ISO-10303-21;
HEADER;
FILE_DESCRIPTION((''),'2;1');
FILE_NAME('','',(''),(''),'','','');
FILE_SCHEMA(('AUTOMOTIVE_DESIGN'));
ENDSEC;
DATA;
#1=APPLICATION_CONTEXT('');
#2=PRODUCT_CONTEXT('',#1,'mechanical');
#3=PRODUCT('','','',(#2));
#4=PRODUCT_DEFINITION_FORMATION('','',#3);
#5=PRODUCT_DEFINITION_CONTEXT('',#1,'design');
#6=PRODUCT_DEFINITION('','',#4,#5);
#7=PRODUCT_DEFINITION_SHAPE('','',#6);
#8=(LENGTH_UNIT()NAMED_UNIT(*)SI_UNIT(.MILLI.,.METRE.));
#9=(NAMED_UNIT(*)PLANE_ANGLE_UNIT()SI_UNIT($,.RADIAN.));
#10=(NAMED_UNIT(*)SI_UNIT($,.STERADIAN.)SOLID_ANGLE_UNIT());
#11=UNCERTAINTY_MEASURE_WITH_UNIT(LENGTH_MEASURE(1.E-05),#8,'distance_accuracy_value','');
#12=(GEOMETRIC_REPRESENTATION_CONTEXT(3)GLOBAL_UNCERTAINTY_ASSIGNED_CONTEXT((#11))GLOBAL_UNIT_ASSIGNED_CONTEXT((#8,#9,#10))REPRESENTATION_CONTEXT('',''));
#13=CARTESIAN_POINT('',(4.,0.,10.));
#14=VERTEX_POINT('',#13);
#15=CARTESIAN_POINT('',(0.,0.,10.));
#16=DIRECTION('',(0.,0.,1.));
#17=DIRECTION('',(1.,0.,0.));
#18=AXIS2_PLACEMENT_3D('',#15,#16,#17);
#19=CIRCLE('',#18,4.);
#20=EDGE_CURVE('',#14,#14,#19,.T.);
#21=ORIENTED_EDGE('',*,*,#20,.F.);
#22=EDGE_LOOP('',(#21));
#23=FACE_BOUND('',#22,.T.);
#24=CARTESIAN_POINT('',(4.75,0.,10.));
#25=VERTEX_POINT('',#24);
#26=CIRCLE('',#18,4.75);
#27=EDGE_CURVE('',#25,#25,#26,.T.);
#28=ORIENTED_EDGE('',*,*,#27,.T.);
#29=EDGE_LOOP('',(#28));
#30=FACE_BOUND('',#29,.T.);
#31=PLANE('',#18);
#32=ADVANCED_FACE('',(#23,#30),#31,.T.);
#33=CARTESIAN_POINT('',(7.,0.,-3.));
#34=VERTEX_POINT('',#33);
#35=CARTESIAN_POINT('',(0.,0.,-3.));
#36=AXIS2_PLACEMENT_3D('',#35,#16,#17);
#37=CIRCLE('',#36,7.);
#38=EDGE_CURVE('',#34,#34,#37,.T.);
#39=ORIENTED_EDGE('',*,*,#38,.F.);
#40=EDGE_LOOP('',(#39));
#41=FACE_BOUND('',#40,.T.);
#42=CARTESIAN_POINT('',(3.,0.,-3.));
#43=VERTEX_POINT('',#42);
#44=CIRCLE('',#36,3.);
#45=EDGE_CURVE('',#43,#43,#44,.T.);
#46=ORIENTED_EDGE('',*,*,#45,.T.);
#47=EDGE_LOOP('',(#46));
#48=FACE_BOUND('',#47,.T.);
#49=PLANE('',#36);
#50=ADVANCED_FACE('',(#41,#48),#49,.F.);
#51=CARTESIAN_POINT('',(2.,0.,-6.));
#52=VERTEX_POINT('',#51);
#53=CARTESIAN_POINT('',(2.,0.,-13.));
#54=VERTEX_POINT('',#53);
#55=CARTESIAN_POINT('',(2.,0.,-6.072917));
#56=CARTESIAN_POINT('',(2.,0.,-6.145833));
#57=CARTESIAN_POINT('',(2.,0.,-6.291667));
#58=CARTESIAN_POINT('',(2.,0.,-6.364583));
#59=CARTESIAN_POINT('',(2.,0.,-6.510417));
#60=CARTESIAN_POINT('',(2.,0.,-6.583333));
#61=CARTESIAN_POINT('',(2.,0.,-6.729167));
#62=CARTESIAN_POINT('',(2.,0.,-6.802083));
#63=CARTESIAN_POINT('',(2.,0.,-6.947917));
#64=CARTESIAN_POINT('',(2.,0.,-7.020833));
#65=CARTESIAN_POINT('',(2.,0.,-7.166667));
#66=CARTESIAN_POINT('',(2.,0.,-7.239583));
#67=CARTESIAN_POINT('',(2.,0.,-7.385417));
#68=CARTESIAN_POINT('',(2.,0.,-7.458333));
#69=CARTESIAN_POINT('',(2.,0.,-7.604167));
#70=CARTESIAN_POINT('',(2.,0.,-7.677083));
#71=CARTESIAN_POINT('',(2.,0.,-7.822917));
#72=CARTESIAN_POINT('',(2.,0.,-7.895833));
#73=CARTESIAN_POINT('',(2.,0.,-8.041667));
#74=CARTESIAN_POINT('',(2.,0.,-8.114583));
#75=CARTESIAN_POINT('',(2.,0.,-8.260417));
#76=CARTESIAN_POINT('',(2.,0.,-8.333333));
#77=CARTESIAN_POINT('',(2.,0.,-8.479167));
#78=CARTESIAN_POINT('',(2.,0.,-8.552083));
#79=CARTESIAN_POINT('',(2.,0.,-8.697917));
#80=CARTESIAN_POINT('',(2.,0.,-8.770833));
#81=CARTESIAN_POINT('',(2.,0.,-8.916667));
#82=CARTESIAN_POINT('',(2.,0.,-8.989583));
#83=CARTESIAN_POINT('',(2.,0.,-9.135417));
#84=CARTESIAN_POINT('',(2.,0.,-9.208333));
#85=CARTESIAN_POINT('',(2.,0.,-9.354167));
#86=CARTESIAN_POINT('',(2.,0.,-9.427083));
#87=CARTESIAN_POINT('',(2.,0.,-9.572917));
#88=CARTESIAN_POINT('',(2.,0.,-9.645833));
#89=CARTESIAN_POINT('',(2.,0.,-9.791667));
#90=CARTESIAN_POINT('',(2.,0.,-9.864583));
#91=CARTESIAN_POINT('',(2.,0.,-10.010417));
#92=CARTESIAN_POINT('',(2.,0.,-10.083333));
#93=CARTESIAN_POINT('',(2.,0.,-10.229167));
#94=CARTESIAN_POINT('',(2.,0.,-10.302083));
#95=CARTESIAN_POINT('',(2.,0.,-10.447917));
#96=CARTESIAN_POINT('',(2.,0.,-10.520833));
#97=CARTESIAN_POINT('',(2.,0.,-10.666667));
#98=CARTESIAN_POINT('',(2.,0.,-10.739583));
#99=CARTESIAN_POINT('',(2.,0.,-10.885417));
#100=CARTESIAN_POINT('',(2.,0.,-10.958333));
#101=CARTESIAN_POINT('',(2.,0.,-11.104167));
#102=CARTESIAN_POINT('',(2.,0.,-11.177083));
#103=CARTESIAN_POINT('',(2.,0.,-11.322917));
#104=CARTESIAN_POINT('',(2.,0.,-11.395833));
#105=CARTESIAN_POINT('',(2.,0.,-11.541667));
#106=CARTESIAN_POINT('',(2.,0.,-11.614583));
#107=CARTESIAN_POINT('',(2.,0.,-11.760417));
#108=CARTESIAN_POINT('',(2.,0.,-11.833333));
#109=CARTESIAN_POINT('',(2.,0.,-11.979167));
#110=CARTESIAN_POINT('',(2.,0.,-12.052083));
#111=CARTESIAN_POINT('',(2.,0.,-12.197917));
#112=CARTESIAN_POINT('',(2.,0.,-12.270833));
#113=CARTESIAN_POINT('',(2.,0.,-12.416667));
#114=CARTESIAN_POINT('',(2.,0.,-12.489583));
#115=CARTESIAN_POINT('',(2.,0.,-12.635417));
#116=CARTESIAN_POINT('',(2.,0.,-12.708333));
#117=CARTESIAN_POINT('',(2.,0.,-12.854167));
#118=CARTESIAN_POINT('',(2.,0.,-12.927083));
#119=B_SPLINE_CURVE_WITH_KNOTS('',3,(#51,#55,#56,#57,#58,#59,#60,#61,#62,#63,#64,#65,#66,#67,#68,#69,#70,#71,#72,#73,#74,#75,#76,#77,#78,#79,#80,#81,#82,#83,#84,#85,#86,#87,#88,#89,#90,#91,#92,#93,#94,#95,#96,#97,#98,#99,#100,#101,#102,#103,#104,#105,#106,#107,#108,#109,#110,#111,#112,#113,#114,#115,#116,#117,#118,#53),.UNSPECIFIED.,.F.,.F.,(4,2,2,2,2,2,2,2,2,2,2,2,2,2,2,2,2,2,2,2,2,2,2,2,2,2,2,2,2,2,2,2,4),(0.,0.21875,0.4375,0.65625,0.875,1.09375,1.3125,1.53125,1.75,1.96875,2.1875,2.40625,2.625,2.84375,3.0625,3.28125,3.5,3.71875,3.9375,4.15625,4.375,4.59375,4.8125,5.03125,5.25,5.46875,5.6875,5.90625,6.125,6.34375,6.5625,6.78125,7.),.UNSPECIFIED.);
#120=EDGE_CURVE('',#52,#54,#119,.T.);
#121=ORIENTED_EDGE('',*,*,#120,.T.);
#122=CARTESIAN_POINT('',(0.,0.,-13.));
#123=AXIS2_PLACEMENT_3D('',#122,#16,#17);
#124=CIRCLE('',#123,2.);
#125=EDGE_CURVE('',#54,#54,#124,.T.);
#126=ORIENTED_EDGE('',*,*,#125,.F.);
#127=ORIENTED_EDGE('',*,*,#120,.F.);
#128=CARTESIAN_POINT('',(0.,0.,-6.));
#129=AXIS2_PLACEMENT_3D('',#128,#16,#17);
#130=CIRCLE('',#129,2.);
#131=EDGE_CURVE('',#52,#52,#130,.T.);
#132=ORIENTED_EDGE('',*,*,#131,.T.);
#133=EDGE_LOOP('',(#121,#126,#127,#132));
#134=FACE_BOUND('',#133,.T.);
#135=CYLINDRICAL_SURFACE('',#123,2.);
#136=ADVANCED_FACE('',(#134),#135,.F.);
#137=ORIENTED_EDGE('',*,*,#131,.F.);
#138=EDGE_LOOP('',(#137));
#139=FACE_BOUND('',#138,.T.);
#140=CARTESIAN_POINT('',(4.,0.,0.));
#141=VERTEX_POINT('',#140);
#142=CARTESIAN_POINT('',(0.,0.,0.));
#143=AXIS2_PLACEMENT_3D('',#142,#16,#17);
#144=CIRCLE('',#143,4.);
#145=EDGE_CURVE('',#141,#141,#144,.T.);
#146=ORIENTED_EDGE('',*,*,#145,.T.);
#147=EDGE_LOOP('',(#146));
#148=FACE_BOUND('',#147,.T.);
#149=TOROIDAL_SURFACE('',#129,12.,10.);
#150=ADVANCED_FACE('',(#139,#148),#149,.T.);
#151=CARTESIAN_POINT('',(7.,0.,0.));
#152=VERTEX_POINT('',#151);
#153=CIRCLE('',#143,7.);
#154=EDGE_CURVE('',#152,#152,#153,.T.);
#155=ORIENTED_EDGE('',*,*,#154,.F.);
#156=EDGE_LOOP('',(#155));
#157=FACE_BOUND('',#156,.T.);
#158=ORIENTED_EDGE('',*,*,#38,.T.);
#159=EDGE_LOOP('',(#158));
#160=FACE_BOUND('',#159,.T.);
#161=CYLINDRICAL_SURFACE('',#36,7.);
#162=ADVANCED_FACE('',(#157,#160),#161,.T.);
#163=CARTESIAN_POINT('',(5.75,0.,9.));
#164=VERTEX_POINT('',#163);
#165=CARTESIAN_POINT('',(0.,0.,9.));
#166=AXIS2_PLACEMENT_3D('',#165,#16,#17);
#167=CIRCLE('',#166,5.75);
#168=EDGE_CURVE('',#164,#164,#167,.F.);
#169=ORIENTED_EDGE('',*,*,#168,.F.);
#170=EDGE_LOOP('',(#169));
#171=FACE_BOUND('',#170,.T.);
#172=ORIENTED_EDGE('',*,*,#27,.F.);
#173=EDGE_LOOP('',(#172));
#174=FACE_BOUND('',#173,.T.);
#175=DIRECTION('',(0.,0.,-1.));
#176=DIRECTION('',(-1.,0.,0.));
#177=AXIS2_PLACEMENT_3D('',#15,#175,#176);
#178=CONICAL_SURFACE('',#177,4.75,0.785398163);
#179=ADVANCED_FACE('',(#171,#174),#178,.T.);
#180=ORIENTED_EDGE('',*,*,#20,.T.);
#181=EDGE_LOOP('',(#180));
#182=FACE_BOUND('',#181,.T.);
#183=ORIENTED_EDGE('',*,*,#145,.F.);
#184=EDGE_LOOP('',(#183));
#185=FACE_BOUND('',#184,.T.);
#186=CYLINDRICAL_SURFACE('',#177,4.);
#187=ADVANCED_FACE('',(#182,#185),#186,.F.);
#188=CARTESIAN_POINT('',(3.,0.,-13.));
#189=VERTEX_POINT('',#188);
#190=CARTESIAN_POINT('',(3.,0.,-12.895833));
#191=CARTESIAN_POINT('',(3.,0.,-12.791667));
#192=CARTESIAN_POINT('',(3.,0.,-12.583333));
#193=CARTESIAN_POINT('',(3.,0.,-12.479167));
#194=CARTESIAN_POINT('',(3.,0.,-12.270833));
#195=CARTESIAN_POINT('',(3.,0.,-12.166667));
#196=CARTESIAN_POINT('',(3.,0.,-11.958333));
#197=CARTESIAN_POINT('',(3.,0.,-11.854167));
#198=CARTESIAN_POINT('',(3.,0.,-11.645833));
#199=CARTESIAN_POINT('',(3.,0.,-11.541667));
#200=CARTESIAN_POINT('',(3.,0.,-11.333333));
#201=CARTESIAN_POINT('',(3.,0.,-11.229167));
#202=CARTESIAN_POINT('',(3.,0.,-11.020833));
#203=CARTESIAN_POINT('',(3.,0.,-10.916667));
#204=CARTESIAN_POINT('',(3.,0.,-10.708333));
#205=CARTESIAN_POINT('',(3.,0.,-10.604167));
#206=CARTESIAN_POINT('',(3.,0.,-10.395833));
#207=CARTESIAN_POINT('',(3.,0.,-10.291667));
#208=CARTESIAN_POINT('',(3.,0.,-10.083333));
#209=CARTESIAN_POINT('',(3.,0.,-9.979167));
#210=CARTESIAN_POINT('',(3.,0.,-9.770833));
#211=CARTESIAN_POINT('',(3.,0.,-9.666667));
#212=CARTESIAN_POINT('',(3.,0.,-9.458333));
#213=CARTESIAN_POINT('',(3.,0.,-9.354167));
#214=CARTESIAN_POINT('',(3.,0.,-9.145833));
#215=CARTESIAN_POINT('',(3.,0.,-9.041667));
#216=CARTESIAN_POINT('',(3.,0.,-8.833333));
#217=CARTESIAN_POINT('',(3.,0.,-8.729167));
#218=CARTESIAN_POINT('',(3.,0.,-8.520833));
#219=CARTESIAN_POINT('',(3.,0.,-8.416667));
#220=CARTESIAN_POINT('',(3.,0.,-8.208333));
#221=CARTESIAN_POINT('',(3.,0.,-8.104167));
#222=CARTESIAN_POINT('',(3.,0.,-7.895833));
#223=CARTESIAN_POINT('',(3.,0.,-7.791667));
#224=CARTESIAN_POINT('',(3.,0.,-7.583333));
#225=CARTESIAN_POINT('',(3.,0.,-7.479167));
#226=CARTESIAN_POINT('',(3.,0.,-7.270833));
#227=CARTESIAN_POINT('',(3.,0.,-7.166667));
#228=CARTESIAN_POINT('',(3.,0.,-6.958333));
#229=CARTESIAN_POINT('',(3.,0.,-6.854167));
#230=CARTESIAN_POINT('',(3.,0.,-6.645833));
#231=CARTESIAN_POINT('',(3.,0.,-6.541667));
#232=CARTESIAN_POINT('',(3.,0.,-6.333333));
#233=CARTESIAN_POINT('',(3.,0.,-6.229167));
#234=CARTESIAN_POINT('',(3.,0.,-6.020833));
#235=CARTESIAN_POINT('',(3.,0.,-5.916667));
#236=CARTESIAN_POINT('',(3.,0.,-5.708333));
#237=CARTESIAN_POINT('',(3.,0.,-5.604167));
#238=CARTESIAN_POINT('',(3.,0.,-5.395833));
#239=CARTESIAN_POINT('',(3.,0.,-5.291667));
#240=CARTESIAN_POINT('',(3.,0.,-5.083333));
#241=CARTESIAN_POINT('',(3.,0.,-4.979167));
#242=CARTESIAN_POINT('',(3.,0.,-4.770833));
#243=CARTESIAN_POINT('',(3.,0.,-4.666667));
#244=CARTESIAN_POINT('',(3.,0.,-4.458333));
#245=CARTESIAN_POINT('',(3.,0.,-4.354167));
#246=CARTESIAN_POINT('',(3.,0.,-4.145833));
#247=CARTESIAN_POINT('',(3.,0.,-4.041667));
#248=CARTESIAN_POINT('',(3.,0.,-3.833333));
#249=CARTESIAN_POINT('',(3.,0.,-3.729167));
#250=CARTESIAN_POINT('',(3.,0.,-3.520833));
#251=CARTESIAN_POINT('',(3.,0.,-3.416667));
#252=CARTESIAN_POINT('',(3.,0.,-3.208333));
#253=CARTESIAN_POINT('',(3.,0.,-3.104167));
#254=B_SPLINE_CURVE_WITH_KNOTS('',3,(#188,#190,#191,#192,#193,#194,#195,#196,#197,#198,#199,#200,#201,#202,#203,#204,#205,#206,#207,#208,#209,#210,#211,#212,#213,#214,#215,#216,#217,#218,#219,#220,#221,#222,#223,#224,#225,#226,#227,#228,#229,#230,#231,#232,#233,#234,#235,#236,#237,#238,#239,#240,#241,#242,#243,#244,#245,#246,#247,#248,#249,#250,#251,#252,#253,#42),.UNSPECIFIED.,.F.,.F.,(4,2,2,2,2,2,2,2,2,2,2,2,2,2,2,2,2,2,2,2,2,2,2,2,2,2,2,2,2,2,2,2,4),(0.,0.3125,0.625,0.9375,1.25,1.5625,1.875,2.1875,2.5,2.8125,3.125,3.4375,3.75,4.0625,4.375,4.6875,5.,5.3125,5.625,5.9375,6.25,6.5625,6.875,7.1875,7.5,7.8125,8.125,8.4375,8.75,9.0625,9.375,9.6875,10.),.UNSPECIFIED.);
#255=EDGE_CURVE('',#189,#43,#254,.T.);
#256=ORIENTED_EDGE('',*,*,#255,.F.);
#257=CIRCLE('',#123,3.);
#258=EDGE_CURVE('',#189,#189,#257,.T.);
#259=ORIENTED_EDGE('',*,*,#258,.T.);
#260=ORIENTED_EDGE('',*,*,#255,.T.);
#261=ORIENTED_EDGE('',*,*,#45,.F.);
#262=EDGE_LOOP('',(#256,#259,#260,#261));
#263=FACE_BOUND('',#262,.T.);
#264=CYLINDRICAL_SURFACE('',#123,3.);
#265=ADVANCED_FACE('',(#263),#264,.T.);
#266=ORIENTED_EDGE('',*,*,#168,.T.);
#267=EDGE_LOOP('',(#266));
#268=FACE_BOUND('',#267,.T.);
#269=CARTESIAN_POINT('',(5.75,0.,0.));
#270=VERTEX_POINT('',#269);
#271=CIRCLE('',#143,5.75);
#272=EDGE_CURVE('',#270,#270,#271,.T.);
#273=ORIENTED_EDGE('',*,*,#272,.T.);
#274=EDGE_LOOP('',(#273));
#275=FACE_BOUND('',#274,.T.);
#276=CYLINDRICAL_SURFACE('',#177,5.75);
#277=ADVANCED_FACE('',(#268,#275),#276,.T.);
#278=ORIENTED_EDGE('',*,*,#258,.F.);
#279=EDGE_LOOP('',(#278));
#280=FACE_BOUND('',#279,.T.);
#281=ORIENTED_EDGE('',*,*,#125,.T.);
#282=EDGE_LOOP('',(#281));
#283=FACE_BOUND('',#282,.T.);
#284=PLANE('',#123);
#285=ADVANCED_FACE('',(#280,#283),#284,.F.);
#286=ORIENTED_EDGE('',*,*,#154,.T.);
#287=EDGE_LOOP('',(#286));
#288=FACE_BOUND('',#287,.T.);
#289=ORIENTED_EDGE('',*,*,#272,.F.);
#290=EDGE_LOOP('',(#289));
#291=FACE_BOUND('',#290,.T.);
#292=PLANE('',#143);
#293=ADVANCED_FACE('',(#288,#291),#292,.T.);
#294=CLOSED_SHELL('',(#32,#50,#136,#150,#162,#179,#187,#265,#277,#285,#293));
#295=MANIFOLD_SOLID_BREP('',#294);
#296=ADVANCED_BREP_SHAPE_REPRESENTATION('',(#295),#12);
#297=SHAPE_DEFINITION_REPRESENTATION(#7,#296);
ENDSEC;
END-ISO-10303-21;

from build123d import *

# Parameters (mm, degrees)
SKETCH1_R           = 5.75
SKETCH1_R_2         = 4
BOSS_EXTRUDE1_DEPTH = 10
BOSS_EXTRUDE2_START = -3
SKETCH1_3_R         = 5.75
SKETCH1_3_R_2       = 3
SKETCH1_3_R_3       = 4
BOSS_EXTRUDE2_DEPTH = 3
BOSS_EXTRUDE3_START = -13
SKETCH1_4_R         = 3
SKETCH1_4_R_2       = 2
BOSS_EXTRUDE3_DEPTH = 13
BOSS_EXTRUDE4_START = -3
SKETCH1_5_R         = 7
SKETCH1_5_R_2       = 5.75
BOSS_EXTRUDE4_DEPTH = 3
FILLET1_R           = 10
CHAMFER1_SIZE       = 1


with BuildPart() as part:
    # Sketch1 → Boss-Extrude1 (new body)
    with BuildSketch(Plane.XY):
        Circle(SKETCH1_R)
        Circle(SKETCH1_R_2, mode=Mode.SUBTRACT)
    extrude(amount=BOSS_EXTRUDE1_DEPTH)

    # Sketch1<3> → Boss-Extrude2 (add)
    # profile 1 of 2: a face of its own
    with BuildSketch(Plane.XY.offset(BOSS_EXTRUDE2_START)):
        Circle(SKETCH1_3_R)
        Circle(SKETCH1_3_R_2, mode=Mode.SUBTRACT)
    # profile 2 of 2: a face of its own
    with BuildSketch(Plane.XY.offset(BOSS_EXTRUDE2_START)):
        Circle(SKETCH1_3_R_3)
        Circle(SKETCH1_3_R_2, mode=Mode.SUBTRACT)
    extrude(amount=BOSS_EXTRUDE2_DEPTH)

    # Sketch1<4> → Boss-Extrude3 (add)
    with BuildSketch(Plane.XY.offset(BOSS_EXTRUDE3_START)):
        Circle(SKETCH1_4_R)
        Circle(SKETCH1_4_R_2, mode=Mode.SUBTRACT)
    extrude(amount=BOSS_EXTRUDE3_DEPTH)

    # Sketch1<5> → Boss-Extrude4 (add)
    with BuildSketch(Plane.XY.offset(BOSS_EXTRUDE4_START)):
        Circle(SKETCH1_5_R)
        Circle(SKETCH1_5_R_2, mode=Mode.SUBTRACT)
    extrude(amount=BOSS_EXTRUDE4_DEPTH)

    # Fillet1
    # the kernel refuses this fillet: 10 mm, written as the material it takes off along each edge
    with BuildSketch(Plane(origin=(0, 0, 0), x_dir=(1, 0, 0), z_dir=(0, -1, 0))) as fillet1_piece_1:
        with BuildLine():
            CenterArc((12, -6), FILLET1_R, 143.130102354, 36.869897646)
            Line((2, -6), (1.8, -6))
            Line((1.8, -6), (1.8, 0))
            Line((1.8, 0), (2, 0.2))
            ThreePointArc((2, 0.2), (3, 0.2), (3.84, 0.12))
            Line((3.84, 0.12), (4, 0))
        make_face()
    revolve(axis=Axis((0, 0, 0), (0, 0, 1)), mode=Mode.SUBTRACT)

    # Chamfer1
    chamfer1_edges = [part.edges().sort_by_distance(p)[0] for p in [
        (-5.75, 0, 10),
    ]]
    chamfer(chamfer1_edges, length=CHAMFER1_SIZE)


solid = part.part
